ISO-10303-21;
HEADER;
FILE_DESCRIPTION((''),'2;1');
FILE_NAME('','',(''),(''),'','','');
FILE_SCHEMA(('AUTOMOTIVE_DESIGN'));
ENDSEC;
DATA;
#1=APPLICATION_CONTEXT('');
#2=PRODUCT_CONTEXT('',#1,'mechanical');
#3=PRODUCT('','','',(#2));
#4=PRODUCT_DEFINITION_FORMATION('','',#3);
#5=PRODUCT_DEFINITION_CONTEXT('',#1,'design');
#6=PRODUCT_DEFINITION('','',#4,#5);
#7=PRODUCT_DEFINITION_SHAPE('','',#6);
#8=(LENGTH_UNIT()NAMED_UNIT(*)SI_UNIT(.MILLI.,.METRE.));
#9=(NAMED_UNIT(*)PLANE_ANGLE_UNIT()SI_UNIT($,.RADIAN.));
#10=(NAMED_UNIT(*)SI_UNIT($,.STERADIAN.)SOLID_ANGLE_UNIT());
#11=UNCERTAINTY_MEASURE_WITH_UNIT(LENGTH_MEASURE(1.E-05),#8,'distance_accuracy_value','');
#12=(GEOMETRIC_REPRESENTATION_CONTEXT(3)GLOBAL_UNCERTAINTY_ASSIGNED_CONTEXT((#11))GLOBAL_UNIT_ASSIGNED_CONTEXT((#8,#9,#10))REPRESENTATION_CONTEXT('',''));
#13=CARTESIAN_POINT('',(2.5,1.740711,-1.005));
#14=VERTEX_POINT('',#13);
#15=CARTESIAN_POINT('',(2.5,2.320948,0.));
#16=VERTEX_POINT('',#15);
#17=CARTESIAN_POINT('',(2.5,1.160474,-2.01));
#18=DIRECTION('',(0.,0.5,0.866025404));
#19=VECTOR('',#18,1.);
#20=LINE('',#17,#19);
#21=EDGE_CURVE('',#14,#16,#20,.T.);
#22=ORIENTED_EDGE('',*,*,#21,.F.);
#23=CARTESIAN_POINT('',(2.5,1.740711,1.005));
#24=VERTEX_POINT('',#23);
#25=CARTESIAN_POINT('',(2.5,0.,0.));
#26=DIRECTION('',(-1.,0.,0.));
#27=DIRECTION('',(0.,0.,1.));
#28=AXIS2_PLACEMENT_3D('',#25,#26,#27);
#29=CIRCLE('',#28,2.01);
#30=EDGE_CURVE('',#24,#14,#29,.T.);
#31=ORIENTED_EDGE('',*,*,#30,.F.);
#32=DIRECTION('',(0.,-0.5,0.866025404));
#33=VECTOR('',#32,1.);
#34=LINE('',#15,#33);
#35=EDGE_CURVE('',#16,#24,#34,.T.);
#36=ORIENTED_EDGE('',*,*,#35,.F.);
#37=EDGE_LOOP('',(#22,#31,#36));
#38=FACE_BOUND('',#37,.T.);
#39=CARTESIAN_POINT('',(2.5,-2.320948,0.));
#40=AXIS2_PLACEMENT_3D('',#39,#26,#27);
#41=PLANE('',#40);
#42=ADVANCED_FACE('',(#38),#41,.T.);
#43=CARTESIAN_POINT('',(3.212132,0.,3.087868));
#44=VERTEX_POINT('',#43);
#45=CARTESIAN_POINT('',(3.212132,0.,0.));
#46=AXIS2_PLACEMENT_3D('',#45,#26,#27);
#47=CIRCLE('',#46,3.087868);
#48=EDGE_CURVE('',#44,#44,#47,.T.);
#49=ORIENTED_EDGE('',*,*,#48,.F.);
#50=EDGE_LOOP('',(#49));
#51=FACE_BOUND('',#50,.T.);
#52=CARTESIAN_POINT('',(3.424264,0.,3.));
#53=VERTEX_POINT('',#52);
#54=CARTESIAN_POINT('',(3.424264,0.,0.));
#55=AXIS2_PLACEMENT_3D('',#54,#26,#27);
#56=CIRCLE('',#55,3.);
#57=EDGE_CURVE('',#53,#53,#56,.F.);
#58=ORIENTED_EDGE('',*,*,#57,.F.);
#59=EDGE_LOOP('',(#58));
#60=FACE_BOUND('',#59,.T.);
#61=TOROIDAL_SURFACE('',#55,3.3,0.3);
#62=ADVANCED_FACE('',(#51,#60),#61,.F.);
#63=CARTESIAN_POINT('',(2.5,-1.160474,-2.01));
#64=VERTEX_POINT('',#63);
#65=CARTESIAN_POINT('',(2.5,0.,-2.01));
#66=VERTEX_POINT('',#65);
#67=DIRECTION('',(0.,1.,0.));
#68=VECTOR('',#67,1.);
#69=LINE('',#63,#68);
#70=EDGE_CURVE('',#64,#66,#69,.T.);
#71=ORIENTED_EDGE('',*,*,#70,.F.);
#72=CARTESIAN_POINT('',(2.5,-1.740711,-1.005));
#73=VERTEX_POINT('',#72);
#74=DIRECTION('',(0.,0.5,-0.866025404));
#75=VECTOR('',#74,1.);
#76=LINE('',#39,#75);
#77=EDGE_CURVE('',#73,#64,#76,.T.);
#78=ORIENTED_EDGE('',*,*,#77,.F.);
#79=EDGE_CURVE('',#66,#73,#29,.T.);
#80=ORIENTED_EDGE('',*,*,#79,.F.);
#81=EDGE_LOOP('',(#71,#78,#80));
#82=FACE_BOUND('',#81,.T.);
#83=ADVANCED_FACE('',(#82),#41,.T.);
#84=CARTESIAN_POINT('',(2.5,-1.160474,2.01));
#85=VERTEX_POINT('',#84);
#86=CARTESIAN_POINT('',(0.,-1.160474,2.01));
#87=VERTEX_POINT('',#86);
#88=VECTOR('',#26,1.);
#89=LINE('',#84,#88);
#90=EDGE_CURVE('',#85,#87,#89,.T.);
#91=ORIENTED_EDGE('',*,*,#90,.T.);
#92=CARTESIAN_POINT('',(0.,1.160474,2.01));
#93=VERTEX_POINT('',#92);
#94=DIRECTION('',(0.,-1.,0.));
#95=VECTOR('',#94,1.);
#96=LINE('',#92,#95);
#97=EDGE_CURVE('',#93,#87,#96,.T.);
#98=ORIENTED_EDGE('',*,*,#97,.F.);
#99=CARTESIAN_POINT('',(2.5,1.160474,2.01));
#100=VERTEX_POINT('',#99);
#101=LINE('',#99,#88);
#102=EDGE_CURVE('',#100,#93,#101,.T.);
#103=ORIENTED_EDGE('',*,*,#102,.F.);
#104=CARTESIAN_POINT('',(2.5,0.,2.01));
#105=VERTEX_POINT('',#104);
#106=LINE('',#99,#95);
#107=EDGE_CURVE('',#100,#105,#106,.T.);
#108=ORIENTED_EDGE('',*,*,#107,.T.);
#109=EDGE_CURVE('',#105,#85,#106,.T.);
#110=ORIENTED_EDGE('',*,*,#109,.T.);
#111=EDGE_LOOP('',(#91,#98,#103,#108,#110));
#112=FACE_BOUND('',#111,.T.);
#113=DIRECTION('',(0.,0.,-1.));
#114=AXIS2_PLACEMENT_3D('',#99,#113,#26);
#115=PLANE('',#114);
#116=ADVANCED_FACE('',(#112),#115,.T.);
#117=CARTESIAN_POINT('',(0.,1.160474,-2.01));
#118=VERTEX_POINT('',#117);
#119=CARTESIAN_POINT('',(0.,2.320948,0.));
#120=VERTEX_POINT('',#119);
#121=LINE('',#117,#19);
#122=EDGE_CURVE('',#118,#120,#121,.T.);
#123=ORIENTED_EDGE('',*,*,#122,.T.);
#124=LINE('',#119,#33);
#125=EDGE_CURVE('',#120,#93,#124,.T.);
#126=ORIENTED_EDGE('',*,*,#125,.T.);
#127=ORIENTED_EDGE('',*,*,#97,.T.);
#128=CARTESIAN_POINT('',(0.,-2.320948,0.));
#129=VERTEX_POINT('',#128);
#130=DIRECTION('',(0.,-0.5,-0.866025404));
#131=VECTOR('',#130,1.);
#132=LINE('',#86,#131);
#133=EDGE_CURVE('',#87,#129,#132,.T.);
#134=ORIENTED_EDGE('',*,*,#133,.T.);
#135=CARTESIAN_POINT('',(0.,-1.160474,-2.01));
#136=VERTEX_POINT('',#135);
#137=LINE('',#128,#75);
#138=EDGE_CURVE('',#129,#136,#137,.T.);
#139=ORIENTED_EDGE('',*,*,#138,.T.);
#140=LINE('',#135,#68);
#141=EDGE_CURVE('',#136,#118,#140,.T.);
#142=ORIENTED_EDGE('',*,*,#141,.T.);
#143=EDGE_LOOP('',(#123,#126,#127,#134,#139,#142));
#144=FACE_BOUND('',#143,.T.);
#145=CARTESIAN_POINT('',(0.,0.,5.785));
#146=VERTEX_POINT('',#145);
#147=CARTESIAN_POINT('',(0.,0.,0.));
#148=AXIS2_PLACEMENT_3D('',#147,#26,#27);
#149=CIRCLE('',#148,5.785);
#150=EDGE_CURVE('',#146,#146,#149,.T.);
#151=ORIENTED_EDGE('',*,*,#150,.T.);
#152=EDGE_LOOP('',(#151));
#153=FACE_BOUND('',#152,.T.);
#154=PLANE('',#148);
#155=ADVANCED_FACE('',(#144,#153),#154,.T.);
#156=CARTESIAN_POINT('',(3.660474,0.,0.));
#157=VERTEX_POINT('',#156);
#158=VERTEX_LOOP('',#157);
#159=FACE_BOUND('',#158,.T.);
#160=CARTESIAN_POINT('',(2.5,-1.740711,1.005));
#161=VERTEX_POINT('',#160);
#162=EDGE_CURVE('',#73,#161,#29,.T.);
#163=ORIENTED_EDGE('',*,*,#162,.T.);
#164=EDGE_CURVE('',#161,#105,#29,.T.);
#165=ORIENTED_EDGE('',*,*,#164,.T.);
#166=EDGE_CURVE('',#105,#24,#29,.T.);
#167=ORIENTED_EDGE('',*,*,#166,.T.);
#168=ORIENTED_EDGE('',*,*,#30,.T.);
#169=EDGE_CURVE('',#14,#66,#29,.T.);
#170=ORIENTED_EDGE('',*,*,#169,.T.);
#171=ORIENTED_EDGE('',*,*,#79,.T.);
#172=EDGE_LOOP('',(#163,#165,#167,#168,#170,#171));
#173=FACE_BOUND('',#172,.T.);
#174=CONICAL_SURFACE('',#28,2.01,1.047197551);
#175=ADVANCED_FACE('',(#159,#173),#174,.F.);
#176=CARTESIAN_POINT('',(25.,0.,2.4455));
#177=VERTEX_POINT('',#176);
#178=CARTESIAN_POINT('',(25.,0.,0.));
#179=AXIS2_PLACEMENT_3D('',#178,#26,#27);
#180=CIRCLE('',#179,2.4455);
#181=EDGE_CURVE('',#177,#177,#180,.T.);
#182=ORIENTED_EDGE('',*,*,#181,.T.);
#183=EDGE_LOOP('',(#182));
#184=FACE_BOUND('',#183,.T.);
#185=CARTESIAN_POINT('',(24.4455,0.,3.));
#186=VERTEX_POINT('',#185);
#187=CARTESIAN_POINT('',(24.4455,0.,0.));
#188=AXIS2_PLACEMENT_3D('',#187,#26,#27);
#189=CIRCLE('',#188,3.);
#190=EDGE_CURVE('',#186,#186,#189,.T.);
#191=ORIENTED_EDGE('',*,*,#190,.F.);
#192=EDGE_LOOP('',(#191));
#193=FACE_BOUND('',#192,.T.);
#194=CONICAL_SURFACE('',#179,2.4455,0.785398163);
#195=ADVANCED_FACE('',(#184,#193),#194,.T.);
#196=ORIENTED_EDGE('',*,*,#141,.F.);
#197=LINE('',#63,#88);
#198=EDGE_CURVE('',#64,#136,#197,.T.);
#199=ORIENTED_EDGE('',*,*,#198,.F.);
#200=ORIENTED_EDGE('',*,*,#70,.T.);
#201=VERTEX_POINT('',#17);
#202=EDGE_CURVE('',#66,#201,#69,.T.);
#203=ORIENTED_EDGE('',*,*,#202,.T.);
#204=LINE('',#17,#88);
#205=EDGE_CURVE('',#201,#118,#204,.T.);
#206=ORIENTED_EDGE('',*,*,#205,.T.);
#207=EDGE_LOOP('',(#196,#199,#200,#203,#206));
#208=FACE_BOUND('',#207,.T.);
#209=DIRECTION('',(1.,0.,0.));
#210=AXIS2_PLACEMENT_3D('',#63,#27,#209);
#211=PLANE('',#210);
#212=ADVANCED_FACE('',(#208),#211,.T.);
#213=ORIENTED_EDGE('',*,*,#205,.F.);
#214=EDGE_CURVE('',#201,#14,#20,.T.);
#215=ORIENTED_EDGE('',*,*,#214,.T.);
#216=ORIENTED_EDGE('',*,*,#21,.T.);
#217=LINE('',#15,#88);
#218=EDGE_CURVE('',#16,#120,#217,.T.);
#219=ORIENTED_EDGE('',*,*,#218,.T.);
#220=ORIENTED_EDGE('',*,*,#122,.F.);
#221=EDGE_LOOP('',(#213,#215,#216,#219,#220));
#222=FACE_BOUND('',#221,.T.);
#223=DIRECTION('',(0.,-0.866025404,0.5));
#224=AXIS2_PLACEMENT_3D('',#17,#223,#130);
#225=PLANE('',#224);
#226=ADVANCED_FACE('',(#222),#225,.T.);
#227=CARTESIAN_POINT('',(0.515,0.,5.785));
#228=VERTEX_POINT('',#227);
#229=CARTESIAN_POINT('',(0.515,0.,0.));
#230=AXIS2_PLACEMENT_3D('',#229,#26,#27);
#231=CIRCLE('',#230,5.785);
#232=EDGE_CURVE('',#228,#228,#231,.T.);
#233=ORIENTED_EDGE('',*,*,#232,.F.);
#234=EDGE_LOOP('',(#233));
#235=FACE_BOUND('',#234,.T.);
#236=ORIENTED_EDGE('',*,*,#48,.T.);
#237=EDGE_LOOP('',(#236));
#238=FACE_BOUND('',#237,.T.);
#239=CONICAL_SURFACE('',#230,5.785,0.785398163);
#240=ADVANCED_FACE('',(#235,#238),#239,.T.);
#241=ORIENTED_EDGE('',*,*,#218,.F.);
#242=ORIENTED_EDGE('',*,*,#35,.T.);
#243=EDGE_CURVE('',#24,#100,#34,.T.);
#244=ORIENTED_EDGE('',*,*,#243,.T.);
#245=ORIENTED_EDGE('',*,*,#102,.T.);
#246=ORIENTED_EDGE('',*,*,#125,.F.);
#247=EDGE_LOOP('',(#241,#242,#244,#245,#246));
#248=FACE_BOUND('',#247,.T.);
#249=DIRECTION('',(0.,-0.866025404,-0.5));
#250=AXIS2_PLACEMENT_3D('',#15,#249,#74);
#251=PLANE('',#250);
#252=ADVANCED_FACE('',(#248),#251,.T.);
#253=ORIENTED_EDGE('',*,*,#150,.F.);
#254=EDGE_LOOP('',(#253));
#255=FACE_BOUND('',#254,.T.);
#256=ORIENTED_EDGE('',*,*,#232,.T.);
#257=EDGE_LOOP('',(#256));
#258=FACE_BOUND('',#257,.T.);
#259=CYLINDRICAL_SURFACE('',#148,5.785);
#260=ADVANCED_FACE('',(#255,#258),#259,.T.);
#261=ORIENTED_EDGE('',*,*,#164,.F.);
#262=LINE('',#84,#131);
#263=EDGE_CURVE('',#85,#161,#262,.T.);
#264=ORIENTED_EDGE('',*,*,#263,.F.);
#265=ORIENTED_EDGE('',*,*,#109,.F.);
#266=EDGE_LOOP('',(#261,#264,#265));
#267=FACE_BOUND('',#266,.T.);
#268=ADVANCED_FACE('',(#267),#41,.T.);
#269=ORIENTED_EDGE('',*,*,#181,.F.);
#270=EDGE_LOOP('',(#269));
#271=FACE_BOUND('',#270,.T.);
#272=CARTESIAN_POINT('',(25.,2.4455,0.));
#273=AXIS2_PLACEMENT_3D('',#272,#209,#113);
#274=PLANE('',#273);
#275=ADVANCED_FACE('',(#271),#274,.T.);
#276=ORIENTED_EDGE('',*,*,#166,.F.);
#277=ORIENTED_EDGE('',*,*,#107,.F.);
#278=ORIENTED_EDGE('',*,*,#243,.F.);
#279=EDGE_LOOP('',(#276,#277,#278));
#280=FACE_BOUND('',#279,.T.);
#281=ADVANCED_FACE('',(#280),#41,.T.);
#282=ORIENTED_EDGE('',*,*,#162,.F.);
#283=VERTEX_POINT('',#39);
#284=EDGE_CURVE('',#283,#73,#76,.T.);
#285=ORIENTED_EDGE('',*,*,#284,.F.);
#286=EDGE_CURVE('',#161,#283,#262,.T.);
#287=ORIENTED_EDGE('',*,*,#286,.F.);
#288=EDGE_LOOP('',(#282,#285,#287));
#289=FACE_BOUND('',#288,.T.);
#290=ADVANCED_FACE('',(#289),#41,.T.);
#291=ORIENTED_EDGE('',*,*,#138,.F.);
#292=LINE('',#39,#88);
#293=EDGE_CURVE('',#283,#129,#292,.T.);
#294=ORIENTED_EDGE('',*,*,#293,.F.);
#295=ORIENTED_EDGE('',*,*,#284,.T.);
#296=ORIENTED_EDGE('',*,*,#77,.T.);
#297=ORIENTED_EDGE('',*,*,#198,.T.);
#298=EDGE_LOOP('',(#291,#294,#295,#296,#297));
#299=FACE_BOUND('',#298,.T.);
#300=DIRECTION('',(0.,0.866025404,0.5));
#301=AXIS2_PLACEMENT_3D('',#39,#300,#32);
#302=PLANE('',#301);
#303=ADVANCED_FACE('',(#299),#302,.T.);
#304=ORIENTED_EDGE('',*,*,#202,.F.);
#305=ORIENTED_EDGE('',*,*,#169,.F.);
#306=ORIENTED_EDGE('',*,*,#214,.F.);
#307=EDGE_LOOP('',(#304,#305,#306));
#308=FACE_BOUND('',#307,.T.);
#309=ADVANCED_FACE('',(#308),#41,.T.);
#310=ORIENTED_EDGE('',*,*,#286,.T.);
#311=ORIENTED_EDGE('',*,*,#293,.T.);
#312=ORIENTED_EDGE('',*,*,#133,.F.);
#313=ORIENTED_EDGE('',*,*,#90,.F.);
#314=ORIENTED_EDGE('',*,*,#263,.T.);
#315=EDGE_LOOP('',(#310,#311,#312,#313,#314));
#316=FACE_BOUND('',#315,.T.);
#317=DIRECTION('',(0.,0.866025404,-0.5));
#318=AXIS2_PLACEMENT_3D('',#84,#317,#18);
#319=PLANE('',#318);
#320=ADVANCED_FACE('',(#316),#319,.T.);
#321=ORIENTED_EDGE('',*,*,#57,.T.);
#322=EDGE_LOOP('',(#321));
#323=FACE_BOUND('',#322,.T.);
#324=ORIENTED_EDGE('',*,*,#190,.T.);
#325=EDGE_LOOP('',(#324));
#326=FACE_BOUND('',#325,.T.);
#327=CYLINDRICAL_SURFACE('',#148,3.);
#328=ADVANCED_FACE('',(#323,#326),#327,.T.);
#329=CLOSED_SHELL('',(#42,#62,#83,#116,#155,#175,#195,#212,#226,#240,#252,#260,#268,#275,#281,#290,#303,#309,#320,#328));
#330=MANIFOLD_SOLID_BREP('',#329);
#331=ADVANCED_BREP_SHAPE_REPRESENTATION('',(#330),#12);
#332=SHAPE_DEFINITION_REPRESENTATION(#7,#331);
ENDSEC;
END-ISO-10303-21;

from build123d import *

# Parameters (mm, degrees)
FILLET1_R   = 0.3
HEX_START   = -2.5
HEX_2_DEPTH = 2.5


with BuildPart() as part:
    # BodySke → BaseBody (revolve)
    with BuildSketch(Plane.XY, mode=Mode.PRIVATE) as basebody_sk:
        Polygon((0, 0), (0, 5.785), (0.515, 5.785), (3.3, 3), (24.4455, 3), (25, 2.4455), (25, 0), align=None)
    revolve(basebody_sk.sketch.rotate(Axis((0, 0, 0), (1, 0, 0)), 90), axis=Axis((0, 0, 0), (1, 0, 0)))

    # Fillet1
    fillet1_edges = [part.edges().sort_by_distance(p)[0] for p in [
        (3.3, 0, -3),
    ]]
    fillet(fillet1_edges, radius=FILLET1_R)

    # Hex 2: read off the stored shape, not the designer's step
    # Hex 2 outline → Hex 2 (cut)
    with BuildSketch(Plane.ZY.offset(HEX_START)):
        Polygon((-2.01, -1.160474041), (0, -2.320948082), (2.01, -1.160474041), (2.01, 1.160474041), (0, 2.320948082), (-2.01, 1.160474041), align=None)
    extrude(amount=HEX_2_DEPTH, mode=Mode.SUBTRACT)

    # Hex 2 2 outline → Hex 2 2 (revolve, cut)
    with BuildSketch(Plane.YX):
        Polygon((2.01, 2.5), (0, 3.660474041), (0, 2.5), align=None)
    revolve(axis=Axis((0, 0, 0), (1, 0, 0)), mode=Mode.SUBTRACT)


solid = part.part
